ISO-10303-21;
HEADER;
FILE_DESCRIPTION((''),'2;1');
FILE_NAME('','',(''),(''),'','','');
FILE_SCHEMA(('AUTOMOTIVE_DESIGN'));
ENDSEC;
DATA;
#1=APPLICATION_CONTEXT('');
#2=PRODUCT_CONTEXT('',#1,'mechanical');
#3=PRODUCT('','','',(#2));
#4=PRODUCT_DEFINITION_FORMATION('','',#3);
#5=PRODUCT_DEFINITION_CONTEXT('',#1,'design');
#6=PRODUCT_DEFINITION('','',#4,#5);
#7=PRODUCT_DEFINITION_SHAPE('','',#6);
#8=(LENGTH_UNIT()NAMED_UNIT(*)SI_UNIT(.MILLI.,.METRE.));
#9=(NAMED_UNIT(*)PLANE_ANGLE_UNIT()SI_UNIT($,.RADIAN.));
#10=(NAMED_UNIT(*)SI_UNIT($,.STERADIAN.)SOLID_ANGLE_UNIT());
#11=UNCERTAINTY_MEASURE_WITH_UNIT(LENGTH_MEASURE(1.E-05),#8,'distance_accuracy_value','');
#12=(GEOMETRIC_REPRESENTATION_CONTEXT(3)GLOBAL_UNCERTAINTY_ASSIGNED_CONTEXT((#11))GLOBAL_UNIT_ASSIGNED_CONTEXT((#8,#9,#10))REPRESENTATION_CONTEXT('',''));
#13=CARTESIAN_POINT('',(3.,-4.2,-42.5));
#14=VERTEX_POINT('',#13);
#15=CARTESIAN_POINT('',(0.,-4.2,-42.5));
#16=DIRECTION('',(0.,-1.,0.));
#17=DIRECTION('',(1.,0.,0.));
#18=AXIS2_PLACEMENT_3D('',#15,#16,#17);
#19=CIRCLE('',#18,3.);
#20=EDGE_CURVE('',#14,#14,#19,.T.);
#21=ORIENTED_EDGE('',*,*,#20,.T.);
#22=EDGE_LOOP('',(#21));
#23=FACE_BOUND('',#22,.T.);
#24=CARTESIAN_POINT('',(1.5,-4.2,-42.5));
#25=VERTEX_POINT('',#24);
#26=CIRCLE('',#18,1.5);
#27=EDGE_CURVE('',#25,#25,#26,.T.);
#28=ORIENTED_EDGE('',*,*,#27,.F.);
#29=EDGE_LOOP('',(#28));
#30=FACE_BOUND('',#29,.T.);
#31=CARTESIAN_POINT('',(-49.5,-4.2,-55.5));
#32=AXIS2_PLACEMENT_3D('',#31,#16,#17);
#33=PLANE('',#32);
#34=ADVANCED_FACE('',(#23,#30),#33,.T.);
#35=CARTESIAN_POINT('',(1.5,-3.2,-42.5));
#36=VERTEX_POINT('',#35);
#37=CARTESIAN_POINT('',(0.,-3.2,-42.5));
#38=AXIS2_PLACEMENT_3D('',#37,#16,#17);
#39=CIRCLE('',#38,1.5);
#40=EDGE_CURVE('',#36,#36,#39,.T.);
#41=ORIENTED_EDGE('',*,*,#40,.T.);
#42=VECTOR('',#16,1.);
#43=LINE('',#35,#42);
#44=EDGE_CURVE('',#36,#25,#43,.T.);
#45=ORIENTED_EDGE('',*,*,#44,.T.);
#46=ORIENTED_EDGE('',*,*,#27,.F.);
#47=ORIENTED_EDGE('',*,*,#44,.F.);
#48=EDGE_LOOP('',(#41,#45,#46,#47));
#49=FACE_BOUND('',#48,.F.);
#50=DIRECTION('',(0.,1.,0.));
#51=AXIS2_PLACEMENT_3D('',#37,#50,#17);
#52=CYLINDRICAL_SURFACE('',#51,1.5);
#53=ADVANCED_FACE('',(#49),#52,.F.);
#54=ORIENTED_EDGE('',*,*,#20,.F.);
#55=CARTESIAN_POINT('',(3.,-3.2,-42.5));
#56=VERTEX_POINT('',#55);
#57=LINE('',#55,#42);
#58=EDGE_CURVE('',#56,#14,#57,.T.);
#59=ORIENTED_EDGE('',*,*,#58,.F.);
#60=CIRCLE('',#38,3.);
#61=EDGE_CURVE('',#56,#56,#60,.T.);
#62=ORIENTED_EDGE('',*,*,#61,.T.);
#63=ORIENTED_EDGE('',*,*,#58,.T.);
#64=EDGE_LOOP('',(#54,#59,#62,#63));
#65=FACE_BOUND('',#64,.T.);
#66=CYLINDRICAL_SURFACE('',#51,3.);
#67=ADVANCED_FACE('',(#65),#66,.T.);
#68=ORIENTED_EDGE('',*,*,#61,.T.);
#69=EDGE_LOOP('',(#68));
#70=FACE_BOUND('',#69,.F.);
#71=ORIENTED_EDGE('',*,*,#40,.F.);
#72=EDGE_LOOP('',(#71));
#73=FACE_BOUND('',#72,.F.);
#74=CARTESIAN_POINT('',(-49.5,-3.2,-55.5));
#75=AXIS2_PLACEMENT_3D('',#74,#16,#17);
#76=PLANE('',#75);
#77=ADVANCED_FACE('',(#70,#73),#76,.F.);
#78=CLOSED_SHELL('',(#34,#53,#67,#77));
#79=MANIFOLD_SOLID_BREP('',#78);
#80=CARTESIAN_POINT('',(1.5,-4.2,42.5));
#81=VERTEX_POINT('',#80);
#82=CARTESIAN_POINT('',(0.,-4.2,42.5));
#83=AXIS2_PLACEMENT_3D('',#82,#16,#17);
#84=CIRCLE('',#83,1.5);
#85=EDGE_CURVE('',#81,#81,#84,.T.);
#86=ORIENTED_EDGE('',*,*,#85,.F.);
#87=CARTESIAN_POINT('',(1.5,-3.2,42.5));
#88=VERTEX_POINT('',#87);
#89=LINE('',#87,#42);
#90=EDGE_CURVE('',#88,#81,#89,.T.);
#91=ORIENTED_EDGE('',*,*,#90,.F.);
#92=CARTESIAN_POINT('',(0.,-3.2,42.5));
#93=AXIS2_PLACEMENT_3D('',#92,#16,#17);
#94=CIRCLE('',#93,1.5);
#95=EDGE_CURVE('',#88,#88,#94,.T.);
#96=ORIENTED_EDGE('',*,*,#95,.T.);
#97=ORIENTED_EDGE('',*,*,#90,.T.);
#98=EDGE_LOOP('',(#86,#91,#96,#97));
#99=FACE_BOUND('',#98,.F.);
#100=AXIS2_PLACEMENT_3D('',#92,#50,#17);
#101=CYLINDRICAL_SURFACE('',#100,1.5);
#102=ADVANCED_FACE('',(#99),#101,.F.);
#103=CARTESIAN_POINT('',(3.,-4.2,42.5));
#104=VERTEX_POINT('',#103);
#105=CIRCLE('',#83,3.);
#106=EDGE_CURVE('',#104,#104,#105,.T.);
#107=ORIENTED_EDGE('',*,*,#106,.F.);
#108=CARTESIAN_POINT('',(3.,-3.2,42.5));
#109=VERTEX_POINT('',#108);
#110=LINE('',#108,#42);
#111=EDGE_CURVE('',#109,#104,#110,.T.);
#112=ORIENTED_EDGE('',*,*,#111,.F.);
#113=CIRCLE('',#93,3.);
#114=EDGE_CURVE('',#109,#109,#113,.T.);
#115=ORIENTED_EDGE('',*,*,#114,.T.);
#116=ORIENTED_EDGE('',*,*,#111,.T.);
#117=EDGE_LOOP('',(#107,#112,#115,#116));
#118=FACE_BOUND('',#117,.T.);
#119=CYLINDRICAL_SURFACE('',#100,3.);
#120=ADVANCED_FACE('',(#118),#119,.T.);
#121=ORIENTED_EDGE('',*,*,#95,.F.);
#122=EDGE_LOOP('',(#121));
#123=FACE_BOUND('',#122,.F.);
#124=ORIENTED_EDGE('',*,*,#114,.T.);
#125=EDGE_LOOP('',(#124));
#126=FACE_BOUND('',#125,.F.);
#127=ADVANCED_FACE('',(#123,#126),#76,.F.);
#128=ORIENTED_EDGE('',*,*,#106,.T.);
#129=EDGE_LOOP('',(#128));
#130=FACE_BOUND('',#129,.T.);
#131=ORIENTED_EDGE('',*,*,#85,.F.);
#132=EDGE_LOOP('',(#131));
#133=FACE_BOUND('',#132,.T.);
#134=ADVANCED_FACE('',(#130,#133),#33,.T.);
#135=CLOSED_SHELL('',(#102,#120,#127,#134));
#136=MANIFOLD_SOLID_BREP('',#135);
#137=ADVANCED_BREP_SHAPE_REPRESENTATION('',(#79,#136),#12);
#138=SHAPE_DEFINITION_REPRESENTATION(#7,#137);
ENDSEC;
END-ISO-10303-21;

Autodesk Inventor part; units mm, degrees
ref_plane "YZ Plane" through (0, 0, 0) normal (1, 0, 0) x (0, 1, 0)
ref_plane "XZ Plane" through (0, 0, 0) normal (0, 1, 0) x (-1, 0, 0)
ref_plane "XY Plane" through (0, 0, 0) normal (0, 0, 1) x (1, 0, 0)
surface "コンポジット1"
sketch "スケッチ1" plane through (-49.5, -3.2, -55.5) normal (0, -1, 0) x (1, 0, 0)
  line L0 (49.5, 98) -> (49.5, 13) construction
  circle A0 centre (49.5, 98) radius 1.5
  circle A1 centre (49.5, 13) radius 1.5
  circle A2 centre (49.5, 98) radius 3
  circle A3 centre (49.5, 13) radius 3
  circle A4 centre (2, 100.9) radius 5.4197 projected
  circle A5 centre (97, 100.9) radius 5.4197 projected
  circle A6 centre (97, 10.1) radius 5.4197 projected
  circle A7 centre (2, 10.1) radius 5.4197 projected
  arc A8 (0, 111) -> (-8, 103) centre (0, 103) ccw projected
  point P0 (49.5, 55.5)
  point P1 (49.5, 55.5)
  dimension "d0" = 85
  dimension "d1" = 3
  dimension "d2" = 6
extrude "押し出し1" add sketch "スケッチ1" along normal blind 1 contours A2 | A3
properties part number "NUC7i5-7BNK-CHASSIS"
